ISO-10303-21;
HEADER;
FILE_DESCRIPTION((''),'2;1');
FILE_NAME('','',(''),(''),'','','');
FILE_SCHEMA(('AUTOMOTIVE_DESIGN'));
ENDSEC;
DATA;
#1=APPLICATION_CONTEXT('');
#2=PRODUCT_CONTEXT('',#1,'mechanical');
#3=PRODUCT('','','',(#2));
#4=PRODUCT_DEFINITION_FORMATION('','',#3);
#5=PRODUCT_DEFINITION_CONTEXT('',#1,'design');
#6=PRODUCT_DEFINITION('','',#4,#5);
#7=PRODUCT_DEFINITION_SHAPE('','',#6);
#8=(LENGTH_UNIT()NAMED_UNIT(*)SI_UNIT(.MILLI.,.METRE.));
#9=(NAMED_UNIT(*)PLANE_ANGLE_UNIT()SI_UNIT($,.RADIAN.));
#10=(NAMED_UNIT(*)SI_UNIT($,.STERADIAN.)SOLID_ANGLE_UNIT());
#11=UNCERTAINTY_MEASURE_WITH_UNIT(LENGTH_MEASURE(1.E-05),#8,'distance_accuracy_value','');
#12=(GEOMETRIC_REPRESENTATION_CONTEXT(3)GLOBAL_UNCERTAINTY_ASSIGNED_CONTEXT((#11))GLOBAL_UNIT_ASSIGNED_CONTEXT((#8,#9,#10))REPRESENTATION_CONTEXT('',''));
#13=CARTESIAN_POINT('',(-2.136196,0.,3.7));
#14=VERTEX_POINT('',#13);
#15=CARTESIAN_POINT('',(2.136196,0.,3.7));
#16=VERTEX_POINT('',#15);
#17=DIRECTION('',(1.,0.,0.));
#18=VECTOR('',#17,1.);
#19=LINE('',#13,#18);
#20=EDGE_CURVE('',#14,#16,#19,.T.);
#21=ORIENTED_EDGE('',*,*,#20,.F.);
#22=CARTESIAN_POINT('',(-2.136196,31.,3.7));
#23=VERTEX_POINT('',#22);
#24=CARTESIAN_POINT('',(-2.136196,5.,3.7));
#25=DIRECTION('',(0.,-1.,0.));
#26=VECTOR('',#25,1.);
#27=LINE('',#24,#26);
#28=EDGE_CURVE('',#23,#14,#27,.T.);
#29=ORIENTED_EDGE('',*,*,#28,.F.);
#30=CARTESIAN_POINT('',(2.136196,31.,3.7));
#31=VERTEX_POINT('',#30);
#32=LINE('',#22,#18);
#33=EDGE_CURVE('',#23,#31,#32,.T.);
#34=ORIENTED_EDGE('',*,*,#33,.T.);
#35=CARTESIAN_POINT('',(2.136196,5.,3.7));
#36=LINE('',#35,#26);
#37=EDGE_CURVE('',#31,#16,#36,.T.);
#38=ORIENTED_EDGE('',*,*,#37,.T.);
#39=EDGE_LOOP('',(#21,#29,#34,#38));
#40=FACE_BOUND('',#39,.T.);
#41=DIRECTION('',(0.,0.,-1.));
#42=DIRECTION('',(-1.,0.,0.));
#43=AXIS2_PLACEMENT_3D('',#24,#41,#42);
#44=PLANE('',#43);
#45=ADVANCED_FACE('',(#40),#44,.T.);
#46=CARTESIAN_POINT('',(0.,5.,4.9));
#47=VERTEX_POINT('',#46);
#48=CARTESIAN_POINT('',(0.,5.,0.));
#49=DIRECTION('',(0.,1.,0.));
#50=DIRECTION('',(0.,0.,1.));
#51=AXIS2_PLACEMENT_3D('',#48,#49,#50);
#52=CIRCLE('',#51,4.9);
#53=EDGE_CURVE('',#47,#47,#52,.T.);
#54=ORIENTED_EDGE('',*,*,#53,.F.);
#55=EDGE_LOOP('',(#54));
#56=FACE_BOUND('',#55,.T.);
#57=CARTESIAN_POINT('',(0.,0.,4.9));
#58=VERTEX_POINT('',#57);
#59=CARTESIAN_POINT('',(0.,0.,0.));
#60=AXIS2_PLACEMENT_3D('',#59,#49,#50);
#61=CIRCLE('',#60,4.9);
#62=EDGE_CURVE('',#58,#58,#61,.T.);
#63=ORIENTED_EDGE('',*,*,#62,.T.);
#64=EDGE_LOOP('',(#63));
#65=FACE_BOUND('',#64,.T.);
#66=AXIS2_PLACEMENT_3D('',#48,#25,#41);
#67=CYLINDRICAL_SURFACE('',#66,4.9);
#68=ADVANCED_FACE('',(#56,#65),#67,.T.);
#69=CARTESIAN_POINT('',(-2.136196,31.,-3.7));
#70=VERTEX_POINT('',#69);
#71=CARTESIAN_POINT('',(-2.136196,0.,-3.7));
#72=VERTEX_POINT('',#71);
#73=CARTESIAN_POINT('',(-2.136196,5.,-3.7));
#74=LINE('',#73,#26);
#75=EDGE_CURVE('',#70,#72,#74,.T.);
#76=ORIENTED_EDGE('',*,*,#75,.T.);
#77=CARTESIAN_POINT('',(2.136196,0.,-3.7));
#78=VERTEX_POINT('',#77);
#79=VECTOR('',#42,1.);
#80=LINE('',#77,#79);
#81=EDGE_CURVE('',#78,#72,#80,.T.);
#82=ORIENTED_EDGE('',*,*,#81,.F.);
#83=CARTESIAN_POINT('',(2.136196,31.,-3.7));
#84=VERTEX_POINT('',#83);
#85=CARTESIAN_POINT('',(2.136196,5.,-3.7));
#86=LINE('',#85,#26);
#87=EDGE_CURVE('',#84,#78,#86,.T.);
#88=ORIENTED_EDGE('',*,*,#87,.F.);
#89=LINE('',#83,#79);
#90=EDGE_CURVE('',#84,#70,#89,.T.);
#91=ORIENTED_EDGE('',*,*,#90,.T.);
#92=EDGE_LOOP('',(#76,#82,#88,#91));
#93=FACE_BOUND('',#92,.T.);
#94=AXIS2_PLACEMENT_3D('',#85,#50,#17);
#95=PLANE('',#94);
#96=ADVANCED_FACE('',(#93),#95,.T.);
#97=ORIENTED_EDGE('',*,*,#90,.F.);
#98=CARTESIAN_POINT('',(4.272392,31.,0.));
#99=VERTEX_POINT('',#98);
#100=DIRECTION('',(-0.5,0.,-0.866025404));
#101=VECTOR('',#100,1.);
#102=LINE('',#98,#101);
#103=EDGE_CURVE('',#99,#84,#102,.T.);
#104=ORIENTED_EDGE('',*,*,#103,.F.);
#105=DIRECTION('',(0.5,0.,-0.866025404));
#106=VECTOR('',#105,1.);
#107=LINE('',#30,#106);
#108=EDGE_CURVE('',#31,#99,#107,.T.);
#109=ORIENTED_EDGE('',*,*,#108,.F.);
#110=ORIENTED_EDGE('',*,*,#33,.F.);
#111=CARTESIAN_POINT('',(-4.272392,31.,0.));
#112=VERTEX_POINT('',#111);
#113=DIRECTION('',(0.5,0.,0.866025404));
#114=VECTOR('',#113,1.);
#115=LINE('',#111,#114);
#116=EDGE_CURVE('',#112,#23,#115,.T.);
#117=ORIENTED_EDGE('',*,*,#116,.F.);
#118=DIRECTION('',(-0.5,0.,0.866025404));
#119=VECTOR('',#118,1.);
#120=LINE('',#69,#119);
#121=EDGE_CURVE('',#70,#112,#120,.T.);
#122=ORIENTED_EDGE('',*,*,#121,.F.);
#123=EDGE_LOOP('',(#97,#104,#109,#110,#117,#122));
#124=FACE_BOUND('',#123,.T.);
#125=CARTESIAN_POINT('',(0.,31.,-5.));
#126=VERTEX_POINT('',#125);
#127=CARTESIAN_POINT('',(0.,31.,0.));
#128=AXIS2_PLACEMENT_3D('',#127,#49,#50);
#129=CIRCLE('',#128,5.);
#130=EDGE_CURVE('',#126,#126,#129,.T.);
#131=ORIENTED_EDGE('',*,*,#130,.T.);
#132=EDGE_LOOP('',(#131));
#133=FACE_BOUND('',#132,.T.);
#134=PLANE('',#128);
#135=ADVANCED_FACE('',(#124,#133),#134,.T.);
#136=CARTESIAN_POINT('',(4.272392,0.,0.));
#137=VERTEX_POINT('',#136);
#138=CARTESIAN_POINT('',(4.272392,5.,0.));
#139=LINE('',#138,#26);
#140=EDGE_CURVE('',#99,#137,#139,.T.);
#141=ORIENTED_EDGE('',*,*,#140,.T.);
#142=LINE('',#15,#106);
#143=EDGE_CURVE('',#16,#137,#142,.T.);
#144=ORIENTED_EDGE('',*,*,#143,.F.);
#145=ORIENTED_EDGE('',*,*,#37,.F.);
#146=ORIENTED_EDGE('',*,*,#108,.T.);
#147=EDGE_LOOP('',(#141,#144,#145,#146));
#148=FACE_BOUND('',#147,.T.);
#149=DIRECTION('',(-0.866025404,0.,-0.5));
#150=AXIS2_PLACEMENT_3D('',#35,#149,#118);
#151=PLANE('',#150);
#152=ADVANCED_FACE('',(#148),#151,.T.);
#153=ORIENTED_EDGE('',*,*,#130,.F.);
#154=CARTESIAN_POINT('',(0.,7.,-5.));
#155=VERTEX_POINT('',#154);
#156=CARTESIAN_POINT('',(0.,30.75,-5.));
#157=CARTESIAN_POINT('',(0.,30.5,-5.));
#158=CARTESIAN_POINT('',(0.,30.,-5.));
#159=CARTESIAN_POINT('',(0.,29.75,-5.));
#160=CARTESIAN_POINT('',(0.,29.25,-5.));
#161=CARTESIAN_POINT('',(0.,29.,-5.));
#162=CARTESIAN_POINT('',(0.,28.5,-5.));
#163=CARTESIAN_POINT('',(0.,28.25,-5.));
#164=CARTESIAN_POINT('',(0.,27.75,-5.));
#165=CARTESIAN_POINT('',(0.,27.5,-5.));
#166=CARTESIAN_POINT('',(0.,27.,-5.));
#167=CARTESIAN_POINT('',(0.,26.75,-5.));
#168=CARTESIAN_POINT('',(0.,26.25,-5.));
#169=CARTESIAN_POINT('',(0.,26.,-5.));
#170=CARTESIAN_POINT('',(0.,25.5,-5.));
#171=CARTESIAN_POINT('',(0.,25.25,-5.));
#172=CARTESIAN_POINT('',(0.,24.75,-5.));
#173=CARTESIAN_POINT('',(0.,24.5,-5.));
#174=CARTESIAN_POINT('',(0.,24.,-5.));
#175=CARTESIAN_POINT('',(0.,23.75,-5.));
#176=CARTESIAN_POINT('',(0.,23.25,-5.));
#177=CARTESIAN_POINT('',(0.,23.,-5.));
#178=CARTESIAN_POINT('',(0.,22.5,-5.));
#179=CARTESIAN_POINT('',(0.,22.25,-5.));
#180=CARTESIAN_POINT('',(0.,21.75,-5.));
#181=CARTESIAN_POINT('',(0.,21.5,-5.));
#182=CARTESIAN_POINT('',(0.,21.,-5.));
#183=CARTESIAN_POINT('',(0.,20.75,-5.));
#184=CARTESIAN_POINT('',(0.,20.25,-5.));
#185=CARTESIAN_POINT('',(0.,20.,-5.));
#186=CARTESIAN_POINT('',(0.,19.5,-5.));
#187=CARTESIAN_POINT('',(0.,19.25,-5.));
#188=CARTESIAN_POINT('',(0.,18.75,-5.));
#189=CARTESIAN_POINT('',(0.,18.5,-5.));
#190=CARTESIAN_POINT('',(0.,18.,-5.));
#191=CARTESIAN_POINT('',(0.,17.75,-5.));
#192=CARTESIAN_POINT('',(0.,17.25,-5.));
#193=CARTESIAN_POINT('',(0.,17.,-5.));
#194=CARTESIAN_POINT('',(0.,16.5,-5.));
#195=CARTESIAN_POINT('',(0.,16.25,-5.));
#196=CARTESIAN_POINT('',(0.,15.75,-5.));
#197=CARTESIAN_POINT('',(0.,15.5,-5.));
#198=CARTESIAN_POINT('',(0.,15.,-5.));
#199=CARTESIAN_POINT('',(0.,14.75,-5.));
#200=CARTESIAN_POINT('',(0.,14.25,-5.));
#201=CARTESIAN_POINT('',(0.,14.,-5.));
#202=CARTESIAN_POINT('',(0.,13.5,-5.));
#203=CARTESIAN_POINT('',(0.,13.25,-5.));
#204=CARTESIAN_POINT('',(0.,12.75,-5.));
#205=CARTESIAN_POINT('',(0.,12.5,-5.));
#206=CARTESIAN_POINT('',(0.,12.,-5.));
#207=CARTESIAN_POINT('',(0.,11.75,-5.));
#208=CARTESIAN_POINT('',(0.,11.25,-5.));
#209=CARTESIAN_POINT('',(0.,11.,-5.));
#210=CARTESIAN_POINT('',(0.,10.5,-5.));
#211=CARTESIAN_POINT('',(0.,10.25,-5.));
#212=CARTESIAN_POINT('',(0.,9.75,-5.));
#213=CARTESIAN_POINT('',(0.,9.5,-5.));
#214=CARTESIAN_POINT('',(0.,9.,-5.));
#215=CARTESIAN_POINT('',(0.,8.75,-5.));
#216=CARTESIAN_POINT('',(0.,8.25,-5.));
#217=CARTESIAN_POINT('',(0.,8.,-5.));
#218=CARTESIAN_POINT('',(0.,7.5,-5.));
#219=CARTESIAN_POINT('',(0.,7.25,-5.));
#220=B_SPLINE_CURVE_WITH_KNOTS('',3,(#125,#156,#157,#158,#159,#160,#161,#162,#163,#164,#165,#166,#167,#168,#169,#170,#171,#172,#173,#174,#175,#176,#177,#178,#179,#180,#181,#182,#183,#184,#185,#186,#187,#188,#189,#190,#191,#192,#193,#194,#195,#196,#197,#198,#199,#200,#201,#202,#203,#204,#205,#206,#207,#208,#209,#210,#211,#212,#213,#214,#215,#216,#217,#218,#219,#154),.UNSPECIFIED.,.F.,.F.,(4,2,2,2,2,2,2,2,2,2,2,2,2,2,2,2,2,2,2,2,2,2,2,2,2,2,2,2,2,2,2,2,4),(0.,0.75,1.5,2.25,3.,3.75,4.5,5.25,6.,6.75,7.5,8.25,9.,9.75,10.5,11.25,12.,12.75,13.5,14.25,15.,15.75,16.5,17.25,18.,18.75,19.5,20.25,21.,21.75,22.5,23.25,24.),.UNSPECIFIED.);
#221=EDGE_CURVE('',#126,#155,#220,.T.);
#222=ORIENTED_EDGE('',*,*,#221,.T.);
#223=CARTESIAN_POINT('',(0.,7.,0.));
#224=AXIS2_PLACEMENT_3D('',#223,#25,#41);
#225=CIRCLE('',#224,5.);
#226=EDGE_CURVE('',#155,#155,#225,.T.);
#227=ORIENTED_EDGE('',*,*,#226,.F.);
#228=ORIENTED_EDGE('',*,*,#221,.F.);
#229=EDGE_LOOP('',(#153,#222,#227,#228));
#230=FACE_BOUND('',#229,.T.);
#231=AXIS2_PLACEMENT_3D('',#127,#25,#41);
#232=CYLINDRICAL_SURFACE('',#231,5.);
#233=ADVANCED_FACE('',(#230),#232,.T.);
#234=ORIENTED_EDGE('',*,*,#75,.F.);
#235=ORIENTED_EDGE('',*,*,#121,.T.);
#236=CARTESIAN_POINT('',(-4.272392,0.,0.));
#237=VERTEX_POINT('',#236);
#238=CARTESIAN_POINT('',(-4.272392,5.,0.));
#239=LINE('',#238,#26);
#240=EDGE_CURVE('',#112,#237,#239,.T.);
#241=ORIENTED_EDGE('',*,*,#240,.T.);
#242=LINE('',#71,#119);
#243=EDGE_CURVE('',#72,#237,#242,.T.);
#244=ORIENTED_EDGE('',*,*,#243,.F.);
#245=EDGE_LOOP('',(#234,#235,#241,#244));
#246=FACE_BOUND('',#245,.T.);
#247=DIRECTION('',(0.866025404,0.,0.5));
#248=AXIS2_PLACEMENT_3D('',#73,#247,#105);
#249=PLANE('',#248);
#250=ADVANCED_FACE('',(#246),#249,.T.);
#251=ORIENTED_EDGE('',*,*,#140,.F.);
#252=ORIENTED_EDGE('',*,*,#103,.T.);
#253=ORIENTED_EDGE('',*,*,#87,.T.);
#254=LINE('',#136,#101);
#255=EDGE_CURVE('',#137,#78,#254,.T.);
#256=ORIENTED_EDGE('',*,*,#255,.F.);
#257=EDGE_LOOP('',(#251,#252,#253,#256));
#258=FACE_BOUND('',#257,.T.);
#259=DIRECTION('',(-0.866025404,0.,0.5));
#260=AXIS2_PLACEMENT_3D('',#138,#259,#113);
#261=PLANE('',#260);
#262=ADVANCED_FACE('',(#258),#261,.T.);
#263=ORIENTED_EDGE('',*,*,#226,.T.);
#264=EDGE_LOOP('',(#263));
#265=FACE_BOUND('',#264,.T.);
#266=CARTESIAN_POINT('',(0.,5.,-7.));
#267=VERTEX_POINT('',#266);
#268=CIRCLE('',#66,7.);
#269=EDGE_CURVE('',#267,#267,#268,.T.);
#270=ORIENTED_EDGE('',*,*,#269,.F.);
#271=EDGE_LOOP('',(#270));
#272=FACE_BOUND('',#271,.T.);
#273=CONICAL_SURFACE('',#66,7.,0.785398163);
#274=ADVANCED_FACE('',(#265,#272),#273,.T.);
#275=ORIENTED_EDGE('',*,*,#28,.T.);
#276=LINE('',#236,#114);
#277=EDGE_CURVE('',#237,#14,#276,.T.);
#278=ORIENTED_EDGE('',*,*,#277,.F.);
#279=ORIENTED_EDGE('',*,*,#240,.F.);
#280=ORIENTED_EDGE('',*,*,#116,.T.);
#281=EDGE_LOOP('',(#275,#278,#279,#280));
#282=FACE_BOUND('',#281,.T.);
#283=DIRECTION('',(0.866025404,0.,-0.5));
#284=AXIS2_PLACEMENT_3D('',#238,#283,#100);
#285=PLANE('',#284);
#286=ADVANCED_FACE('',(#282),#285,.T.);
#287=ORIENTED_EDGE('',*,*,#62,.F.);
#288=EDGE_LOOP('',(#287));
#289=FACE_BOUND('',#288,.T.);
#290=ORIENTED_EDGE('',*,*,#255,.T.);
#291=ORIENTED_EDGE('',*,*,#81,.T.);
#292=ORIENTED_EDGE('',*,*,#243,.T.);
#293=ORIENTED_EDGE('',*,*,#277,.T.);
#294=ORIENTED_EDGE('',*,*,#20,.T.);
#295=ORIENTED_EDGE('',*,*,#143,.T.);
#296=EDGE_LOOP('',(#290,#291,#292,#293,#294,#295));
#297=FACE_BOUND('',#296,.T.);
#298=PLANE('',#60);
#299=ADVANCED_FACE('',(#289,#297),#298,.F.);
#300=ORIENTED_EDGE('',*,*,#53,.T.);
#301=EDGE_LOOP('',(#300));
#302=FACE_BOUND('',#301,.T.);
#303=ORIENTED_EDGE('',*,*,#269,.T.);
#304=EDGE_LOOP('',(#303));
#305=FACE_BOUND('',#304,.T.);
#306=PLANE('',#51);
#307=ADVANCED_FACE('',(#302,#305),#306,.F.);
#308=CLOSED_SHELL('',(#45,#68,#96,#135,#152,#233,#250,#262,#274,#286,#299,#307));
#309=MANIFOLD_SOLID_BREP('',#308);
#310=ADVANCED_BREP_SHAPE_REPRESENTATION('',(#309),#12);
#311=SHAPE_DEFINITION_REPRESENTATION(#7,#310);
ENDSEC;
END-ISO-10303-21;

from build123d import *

# Parameters (mm, degrees)
SKETCH_1_R      = 4.9
EXTRUDE_1_DEPTH = 5
SKETCH_2_R      = 5
EXTRUDE_2_DEPTH = 26
SKETCH_5_R      = 7
SKETCH_5_R_2    = 5
EXTRUDE_4_DEPTH = 2
CHAMFER_1_SIZE  = 2


with BuildPart() as part:
    # 草图1 → 凸台-拉伸1 (new body)
    with BuildSketch(Plane(origin=(0, 0, 0), x_dir=(1, 0, 0), z_dir=(0, 1, 0))):
        with Locations(Location((0, 0, 0), (0, 0, 270))):
            Circle(SKETCH_1_R)
        Polygon((4.272391992, 0), (2.136195996, 3.7), (-2.136195996, 3.7), (-4.272391992, 0), (-2.136195996, -3.7), (2.136195996, -3.7), align=None, mode=Mode.SUBTRACT)
    extrude(amount=EXTRUDE_1_DEPTH)

    # 草图2 → 凸台-拉伸2 (add)
    with BuildSketch(Plane(origin=(0, 5, 0), x_dir=(1, 0, 0), z_dir=(0, 1, 0))):
        with Locations(Location((0, 0, 0), (0, 0, 90))):
            Circle(SKETCH_2_R)
        Polygon((4.272391992, 0), (2.136195996, 3.7), (-2.136195996, 3.7), (-4.272391992, 0), (-2.136195996, -3.7), (2.136195996, -3.7), align=None, mode=Mode.SUBTRACT)
    extrude(amount=EXTRUDE_2_DEPTH)

    # 草图5 → 凸台-拉伸4 (add)
    with BuildSketch(Plane.XZ.offset(-5)):
        with Locations(Location((0, 0, 0), (0, 0, 270))):
            Circle(SKETCH_5_R)
        with Locations(Location((0, 0, 0), (0, 0, 270))):
            Circle(SKETCH_5_R_2, mode=Mode.SUBTRACT)
    extrude(amount=-EXTRUDE_4_DEPTH)

    # 倒角1
    chamfer_1_edges = [part.edges().sort_by_distance(p)[0] for p in [
        (0, 7, 7),
    ]]
    chamfer(chamfer_1_edges, length=CHAMFER_1_SIZE - 0.0001)  # a hair under: the kernel refuses the full size


solid = part.part
